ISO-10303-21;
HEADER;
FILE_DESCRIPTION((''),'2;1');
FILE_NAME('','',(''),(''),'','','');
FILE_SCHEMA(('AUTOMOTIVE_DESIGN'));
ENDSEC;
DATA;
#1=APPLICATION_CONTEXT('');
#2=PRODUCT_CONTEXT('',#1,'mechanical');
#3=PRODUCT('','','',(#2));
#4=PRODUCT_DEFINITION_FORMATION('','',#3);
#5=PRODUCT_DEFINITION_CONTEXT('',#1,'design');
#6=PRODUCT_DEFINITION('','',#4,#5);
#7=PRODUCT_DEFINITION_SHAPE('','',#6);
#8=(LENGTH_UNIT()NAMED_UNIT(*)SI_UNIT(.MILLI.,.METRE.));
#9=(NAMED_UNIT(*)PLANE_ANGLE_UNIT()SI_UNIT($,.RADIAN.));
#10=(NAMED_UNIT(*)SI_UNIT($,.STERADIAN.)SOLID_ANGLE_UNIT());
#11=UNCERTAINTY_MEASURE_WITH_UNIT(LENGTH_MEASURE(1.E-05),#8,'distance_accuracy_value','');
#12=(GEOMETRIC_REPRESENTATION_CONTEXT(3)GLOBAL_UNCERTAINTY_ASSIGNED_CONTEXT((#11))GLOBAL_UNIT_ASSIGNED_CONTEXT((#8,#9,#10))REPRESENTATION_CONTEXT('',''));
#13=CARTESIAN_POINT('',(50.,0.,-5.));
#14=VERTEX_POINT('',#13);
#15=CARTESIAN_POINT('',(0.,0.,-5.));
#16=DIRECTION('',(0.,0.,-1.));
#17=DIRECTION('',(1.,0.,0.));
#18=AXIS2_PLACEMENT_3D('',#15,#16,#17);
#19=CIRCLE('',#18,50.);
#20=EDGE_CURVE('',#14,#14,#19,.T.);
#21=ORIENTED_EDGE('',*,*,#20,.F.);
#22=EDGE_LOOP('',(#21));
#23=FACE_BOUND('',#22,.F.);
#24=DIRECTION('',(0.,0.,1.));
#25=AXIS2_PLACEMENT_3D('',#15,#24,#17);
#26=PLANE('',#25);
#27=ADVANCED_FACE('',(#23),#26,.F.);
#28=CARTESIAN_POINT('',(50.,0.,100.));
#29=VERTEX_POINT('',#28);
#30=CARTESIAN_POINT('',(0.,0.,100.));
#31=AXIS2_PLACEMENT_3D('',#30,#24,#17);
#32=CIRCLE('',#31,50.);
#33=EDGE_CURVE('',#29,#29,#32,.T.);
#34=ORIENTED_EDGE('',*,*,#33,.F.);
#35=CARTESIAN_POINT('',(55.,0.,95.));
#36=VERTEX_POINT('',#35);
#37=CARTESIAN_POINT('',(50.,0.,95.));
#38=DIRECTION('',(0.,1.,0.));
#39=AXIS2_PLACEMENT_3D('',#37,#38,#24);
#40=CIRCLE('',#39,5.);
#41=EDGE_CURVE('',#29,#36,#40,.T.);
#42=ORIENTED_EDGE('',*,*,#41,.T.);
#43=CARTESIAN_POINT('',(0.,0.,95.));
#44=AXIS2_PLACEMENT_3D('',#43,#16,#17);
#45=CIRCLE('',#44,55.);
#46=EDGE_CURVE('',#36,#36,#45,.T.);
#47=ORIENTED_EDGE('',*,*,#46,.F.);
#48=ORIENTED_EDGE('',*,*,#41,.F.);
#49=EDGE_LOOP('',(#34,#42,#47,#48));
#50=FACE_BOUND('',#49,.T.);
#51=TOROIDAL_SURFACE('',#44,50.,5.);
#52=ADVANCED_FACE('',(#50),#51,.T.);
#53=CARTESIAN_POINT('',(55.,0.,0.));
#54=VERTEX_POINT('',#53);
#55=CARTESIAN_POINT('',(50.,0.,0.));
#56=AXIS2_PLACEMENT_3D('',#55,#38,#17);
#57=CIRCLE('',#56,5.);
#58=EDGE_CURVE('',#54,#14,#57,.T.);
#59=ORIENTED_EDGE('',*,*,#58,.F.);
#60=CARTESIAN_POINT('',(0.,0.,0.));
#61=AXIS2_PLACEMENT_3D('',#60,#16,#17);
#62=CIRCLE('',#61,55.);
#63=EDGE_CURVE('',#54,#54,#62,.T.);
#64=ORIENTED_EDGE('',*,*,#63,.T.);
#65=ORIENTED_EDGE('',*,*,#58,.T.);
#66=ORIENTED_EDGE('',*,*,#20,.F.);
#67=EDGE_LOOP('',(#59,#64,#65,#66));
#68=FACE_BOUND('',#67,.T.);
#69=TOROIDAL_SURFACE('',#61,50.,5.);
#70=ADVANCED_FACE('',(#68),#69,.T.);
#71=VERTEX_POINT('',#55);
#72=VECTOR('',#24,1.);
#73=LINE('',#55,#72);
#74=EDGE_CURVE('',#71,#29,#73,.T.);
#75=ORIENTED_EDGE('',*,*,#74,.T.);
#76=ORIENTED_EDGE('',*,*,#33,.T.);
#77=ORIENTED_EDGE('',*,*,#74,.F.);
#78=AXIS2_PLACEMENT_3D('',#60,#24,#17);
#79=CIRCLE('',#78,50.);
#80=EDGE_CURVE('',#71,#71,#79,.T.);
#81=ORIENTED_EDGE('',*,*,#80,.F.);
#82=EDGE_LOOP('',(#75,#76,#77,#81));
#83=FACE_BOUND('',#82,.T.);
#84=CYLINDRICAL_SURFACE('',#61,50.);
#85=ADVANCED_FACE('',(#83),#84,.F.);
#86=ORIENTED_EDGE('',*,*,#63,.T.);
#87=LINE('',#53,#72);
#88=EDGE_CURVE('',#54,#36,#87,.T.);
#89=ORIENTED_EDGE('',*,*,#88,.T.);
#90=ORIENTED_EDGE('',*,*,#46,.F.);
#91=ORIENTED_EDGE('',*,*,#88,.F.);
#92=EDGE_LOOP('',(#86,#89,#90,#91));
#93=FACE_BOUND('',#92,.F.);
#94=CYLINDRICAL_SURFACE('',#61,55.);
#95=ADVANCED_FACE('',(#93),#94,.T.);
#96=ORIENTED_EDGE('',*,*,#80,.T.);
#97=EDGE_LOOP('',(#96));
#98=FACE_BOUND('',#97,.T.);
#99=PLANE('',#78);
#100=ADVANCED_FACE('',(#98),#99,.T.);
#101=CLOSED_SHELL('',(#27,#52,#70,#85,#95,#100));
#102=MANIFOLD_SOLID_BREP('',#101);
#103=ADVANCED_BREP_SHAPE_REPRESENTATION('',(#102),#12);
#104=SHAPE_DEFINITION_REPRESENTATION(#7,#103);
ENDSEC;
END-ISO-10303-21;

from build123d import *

# Parameters (mm, degrees)
F0_R     = 50
F1_DEPTH = 100
F2_T     = 5


# Not quite as in the source:
# - a fillet or chamfer that OpenCascade refuses, or shapes differently, is made with other operations: its cross-section is extruded or revolved along the edge and cut away or added
# - a feature of the source that left no trace in its solid (it failed there, or was rolled back) is left out


with BuildPart() as f1:
    # F0 (on Top) → F1 (new body)
    with BuildSketch(Plane.XY):
        Circle(F0_R)
    extrude(amount=F1_DEPTH)

    # F2
    f2_openings = [f1.faces().sort_by_distance(p)[0] for p in [
        (0, 0, 100),
    ]]
    offset(amount=F2_T, openings=f2_openings, kind=Kind.INTERSECTION)

    # F3: fillet of radius 5 on 2 edges, made by hand

    # F3_s1 → F3_t2 (revolve, cut)
    with BuildSketch(Plane.XZ):
        with BuildLine():
            ThreePointArc((50, 100), (53.5355339059, 98.5355339059), (55, 95))
            Line((55, 95), (55, 100))
            Line((55, 100), (50, 100))
        make_face()
    revolve(axis=Axis((0, 0, 100), (0, 0, -1)), mode=Mode.SUBTRACT)

    # F3_s3 → F3_t4 (revolve, cut)
    with BuildSketch(Plane.XZ):
        with BuildLine():
            ThreePointArc((55, 0), (53.5355339059, -3.5355339059), (50, -5))
            Line((50, -5), (55, -5))
            Line((55, -5), (55, 0))
        make_face()
    revolve(axis=Axis((0, 0, -5), (0, 0, -1)), mode=Mode.SUBTRACT)


solid = f1.part
